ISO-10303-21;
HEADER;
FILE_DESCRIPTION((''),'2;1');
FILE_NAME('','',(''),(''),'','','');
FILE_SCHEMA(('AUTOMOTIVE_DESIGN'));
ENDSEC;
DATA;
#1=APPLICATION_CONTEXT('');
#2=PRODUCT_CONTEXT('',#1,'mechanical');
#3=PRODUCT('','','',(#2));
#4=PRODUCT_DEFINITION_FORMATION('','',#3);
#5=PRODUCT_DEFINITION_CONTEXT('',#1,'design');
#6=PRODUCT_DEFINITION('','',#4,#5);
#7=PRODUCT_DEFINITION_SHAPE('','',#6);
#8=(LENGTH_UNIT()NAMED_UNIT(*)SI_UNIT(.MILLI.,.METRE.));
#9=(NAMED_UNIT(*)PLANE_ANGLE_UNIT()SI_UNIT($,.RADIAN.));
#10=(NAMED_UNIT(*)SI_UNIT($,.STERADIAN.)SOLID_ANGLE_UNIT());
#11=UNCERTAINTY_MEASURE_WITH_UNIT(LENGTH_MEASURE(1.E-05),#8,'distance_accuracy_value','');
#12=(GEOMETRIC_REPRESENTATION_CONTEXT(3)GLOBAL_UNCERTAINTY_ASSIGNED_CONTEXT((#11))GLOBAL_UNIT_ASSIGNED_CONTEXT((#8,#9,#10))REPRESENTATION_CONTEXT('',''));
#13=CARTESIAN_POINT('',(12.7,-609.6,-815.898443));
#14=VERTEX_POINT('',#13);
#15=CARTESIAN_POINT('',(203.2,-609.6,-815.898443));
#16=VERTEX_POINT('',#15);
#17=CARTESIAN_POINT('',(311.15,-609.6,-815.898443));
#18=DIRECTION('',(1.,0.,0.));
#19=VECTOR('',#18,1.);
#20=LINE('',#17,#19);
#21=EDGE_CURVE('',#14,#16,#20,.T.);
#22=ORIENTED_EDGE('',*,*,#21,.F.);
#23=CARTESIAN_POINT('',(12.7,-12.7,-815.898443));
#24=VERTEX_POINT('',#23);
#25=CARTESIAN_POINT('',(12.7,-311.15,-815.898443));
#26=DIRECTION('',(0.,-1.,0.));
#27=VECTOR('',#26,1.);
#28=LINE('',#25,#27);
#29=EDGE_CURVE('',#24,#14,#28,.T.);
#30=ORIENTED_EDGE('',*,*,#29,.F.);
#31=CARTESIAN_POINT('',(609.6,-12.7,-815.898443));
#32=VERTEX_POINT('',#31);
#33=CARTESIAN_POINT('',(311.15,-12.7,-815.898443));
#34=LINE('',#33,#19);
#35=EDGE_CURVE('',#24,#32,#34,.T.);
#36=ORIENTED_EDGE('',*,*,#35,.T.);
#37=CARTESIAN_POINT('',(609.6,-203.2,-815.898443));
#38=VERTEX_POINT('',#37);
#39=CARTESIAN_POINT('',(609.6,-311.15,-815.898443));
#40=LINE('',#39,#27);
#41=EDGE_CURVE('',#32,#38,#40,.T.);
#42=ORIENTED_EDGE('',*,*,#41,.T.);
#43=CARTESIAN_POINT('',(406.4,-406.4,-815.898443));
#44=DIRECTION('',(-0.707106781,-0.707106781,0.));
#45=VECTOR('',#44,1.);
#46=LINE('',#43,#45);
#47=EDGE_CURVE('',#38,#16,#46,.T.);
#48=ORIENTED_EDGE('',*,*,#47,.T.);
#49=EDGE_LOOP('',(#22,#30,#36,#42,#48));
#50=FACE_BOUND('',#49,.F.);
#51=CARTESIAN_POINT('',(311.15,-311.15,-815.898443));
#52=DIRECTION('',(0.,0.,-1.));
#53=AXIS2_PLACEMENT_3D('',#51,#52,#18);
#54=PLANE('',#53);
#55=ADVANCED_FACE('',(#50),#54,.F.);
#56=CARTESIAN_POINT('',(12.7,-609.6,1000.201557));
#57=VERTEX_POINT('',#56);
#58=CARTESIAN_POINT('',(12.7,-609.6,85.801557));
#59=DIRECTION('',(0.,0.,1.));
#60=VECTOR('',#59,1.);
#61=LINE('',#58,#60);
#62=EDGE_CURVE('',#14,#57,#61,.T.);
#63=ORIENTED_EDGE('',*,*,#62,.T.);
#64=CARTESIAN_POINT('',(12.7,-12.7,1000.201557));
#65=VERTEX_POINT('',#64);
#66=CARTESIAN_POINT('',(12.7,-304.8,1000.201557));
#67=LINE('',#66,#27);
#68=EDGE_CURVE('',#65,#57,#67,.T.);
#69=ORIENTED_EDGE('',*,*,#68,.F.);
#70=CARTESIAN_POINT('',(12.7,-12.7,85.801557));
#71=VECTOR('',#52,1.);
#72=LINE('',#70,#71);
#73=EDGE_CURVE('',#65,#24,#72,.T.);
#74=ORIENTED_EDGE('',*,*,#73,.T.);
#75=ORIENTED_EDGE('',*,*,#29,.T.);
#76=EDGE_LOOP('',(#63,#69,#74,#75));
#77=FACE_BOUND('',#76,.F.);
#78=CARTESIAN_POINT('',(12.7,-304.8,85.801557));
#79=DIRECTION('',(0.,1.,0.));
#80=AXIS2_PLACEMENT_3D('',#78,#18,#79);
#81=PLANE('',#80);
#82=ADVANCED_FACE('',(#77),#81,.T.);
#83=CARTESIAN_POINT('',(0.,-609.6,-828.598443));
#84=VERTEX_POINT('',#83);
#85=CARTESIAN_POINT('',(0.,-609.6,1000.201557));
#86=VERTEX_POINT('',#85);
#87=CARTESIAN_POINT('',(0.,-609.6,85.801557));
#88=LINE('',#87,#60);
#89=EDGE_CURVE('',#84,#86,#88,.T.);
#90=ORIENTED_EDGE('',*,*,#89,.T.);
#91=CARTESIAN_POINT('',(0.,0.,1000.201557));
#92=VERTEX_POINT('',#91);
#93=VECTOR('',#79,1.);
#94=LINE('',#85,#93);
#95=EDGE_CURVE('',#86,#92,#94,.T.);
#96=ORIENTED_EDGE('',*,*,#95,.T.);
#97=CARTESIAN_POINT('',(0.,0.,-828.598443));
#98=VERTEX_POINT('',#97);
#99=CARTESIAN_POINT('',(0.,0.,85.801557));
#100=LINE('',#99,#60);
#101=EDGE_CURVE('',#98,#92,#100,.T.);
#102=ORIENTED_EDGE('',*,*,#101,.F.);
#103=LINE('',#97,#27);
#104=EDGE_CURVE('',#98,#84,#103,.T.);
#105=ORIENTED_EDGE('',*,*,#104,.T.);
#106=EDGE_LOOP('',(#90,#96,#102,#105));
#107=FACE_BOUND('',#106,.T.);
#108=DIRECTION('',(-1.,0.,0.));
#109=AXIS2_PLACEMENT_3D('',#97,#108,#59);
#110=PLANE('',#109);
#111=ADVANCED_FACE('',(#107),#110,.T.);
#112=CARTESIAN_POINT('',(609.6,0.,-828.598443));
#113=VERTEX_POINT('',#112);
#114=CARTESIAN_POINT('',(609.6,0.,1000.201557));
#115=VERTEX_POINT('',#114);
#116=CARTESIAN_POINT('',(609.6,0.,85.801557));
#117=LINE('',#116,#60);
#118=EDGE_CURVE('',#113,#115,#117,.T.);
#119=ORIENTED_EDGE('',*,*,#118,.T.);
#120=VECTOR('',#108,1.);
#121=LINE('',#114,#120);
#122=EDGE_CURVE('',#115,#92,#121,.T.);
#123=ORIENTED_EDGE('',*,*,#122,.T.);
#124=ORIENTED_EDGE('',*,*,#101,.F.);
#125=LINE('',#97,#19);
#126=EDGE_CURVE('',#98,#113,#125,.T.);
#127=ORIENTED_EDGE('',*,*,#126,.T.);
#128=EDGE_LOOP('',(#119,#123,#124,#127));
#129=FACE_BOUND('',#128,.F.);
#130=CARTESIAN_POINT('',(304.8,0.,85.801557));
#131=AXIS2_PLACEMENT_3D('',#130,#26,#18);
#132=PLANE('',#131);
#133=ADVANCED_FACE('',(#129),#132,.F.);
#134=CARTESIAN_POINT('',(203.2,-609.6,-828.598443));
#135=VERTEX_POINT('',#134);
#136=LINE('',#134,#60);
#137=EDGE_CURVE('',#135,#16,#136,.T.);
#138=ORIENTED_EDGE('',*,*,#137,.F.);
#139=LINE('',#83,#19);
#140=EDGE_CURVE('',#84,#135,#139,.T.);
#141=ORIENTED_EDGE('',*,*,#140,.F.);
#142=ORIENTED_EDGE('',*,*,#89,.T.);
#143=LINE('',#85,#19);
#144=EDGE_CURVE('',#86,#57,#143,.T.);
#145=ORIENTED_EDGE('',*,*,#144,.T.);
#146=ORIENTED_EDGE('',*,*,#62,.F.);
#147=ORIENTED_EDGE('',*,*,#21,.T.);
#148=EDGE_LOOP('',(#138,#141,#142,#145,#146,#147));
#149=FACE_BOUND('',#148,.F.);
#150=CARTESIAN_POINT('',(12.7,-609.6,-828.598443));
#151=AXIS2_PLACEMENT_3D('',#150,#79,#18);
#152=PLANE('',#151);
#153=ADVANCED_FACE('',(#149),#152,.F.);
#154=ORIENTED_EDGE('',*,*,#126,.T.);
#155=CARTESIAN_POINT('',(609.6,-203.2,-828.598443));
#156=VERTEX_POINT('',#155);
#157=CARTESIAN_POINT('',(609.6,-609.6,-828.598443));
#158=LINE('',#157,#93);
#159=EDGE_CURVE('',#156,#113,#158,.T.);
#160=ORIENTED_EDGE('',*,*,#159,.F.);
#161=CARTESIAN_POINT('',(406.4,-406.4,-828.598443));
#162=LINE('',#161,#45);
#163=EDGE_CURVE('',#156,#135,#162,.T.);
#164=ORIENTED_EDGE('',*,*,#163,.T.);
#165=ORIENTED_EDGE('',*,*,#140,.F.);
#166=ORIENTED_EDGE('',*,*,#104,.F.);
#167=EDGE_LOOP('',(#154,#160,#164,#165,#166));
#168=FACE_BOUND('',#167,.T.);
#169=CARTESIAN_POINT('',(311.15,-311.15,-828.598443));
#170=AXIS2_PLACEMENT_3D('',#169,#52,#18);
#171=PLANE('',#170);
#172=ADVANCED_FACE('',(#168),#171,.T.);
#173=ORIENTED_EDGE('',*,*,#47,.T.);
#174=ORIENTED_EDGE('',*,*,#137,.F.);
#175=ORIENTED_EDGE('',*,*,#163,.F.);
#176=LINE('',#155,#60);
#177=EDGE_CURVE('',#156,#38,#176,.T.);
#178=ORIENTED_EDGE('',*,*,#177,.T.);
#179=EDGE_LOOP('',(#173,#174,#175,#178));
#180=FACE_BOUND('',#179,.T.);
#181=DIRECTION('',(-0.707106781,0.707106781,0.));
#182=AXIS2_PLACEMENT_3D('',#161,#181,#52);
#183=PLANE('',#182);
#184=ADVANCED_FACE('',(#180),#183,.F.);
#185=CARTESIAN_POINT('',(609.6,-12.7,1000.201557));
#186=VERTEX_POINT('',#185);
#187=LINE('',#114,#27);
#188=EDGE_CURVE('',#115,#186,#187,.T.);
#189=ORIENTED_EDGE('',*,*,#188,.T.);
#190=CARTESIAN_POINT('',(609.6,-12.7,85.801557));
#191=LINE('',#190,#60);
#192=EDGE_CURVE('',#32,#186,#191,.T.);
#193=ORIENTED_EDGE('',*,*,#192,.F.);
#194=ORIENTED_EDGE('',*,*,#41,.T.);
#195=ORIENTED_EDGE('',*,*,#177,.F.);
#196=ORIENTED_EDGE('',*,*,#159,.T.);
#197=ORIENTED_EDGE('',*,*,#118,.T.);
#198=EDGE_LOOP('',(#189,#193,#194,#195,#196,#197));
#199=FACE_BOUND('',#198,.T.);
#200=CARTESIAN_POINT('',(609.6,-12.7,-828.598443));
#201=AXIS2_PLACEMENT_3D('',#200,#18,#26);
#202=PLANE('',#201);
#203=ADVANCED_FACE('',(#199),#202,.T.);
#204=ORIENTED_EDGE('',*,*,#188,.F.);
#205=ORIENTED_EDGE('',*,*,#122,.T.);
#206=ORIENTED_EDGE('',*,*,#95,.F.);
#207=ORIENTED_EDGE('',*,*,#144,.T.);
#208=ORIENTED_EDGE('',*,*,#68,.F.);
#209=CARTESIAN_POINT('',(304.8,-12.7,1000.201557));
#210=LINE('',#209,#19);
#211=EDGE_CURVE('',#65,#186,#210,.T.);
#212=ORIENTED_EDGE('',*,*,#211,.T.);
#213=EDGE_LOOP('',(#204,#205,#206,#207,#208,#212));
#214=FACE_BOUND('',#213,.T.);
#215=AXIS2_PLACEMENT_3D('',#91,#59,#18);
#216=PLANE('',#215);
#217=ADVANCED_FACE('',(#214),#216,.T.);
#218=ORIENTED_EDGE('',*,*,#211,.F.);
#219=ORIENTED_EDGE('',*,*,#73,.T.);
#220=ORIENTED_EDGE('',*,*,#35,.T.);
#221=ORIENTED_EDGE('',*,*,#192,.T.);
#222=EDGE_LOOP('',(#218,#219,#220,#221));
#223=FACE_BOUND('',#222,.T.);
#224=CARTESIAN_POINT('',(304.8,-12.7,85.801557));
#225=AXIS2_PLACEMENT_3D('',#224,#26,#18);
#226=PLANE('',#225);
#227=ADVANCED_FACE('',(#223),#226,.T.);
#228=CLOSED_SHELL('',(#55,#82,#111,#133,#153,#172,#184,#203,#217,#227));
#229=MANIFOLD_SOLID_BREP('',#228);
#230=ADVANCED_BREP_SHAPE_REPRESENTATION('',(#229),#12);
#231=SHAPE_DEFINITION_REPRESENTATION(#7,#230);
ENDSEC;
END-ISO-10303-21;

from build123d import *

# Parameters (mm, degrees)
F0_W     = 609.6
F0_H     = 1828.8
F1_DEPTH = 12.7
F4_W     = 596.9
F4_H     = 596.9
F5_DEPTH = 12.7
F6_SIZE  = 406.4


# Not quite as in the source:
# - a feature of the source that left no trace in its solid (it failed there, or was rolled back) is left out
# - a pattern or mirror of a feature is missing from the dataset's text; its kind, count and spacing are read off the source's solid


with BuildPart() as f1:
    # F0 (on Front) → F1 (new body)
    with BuildSketch(Plane.XZ):
        with Locations((304.8, 85.8015570831)):
            Rectangle(F0_W, F0_H)
    extrude(amount=F1_DEPTH)

    # F1_copies: F1 across plane


with BuildPart() as f1_1:
    add(f1.part)
    add(f1.part.mirror(Plane(origin=(0, 0, 0), x_dir=(0.7071067812, -0.7071067812, 0), z_dir=(-0.7071067812, -0.7071067812, 0))))

    # F4 (on face) → F5 (join)
    with BuildSketch(Plane(origin=(0, 0, -828.5984429169), x_dir=(1, 0, 0), z_dir=(0, 0, -1))):
        with Locations((311.15, 311.15)):
            Rectangle(F4_W, F4_H)
    extrude(amount=-F5_DEPTH)

    # F6
    f6_edges = [f1_1.edges().sort_by_distance(p)[0] for p in [
        (609.6, -609.6, -822.248443),
    ]]
    chamfer(f6_edges, length=F6_SIZE)


solid = f1_1.part
